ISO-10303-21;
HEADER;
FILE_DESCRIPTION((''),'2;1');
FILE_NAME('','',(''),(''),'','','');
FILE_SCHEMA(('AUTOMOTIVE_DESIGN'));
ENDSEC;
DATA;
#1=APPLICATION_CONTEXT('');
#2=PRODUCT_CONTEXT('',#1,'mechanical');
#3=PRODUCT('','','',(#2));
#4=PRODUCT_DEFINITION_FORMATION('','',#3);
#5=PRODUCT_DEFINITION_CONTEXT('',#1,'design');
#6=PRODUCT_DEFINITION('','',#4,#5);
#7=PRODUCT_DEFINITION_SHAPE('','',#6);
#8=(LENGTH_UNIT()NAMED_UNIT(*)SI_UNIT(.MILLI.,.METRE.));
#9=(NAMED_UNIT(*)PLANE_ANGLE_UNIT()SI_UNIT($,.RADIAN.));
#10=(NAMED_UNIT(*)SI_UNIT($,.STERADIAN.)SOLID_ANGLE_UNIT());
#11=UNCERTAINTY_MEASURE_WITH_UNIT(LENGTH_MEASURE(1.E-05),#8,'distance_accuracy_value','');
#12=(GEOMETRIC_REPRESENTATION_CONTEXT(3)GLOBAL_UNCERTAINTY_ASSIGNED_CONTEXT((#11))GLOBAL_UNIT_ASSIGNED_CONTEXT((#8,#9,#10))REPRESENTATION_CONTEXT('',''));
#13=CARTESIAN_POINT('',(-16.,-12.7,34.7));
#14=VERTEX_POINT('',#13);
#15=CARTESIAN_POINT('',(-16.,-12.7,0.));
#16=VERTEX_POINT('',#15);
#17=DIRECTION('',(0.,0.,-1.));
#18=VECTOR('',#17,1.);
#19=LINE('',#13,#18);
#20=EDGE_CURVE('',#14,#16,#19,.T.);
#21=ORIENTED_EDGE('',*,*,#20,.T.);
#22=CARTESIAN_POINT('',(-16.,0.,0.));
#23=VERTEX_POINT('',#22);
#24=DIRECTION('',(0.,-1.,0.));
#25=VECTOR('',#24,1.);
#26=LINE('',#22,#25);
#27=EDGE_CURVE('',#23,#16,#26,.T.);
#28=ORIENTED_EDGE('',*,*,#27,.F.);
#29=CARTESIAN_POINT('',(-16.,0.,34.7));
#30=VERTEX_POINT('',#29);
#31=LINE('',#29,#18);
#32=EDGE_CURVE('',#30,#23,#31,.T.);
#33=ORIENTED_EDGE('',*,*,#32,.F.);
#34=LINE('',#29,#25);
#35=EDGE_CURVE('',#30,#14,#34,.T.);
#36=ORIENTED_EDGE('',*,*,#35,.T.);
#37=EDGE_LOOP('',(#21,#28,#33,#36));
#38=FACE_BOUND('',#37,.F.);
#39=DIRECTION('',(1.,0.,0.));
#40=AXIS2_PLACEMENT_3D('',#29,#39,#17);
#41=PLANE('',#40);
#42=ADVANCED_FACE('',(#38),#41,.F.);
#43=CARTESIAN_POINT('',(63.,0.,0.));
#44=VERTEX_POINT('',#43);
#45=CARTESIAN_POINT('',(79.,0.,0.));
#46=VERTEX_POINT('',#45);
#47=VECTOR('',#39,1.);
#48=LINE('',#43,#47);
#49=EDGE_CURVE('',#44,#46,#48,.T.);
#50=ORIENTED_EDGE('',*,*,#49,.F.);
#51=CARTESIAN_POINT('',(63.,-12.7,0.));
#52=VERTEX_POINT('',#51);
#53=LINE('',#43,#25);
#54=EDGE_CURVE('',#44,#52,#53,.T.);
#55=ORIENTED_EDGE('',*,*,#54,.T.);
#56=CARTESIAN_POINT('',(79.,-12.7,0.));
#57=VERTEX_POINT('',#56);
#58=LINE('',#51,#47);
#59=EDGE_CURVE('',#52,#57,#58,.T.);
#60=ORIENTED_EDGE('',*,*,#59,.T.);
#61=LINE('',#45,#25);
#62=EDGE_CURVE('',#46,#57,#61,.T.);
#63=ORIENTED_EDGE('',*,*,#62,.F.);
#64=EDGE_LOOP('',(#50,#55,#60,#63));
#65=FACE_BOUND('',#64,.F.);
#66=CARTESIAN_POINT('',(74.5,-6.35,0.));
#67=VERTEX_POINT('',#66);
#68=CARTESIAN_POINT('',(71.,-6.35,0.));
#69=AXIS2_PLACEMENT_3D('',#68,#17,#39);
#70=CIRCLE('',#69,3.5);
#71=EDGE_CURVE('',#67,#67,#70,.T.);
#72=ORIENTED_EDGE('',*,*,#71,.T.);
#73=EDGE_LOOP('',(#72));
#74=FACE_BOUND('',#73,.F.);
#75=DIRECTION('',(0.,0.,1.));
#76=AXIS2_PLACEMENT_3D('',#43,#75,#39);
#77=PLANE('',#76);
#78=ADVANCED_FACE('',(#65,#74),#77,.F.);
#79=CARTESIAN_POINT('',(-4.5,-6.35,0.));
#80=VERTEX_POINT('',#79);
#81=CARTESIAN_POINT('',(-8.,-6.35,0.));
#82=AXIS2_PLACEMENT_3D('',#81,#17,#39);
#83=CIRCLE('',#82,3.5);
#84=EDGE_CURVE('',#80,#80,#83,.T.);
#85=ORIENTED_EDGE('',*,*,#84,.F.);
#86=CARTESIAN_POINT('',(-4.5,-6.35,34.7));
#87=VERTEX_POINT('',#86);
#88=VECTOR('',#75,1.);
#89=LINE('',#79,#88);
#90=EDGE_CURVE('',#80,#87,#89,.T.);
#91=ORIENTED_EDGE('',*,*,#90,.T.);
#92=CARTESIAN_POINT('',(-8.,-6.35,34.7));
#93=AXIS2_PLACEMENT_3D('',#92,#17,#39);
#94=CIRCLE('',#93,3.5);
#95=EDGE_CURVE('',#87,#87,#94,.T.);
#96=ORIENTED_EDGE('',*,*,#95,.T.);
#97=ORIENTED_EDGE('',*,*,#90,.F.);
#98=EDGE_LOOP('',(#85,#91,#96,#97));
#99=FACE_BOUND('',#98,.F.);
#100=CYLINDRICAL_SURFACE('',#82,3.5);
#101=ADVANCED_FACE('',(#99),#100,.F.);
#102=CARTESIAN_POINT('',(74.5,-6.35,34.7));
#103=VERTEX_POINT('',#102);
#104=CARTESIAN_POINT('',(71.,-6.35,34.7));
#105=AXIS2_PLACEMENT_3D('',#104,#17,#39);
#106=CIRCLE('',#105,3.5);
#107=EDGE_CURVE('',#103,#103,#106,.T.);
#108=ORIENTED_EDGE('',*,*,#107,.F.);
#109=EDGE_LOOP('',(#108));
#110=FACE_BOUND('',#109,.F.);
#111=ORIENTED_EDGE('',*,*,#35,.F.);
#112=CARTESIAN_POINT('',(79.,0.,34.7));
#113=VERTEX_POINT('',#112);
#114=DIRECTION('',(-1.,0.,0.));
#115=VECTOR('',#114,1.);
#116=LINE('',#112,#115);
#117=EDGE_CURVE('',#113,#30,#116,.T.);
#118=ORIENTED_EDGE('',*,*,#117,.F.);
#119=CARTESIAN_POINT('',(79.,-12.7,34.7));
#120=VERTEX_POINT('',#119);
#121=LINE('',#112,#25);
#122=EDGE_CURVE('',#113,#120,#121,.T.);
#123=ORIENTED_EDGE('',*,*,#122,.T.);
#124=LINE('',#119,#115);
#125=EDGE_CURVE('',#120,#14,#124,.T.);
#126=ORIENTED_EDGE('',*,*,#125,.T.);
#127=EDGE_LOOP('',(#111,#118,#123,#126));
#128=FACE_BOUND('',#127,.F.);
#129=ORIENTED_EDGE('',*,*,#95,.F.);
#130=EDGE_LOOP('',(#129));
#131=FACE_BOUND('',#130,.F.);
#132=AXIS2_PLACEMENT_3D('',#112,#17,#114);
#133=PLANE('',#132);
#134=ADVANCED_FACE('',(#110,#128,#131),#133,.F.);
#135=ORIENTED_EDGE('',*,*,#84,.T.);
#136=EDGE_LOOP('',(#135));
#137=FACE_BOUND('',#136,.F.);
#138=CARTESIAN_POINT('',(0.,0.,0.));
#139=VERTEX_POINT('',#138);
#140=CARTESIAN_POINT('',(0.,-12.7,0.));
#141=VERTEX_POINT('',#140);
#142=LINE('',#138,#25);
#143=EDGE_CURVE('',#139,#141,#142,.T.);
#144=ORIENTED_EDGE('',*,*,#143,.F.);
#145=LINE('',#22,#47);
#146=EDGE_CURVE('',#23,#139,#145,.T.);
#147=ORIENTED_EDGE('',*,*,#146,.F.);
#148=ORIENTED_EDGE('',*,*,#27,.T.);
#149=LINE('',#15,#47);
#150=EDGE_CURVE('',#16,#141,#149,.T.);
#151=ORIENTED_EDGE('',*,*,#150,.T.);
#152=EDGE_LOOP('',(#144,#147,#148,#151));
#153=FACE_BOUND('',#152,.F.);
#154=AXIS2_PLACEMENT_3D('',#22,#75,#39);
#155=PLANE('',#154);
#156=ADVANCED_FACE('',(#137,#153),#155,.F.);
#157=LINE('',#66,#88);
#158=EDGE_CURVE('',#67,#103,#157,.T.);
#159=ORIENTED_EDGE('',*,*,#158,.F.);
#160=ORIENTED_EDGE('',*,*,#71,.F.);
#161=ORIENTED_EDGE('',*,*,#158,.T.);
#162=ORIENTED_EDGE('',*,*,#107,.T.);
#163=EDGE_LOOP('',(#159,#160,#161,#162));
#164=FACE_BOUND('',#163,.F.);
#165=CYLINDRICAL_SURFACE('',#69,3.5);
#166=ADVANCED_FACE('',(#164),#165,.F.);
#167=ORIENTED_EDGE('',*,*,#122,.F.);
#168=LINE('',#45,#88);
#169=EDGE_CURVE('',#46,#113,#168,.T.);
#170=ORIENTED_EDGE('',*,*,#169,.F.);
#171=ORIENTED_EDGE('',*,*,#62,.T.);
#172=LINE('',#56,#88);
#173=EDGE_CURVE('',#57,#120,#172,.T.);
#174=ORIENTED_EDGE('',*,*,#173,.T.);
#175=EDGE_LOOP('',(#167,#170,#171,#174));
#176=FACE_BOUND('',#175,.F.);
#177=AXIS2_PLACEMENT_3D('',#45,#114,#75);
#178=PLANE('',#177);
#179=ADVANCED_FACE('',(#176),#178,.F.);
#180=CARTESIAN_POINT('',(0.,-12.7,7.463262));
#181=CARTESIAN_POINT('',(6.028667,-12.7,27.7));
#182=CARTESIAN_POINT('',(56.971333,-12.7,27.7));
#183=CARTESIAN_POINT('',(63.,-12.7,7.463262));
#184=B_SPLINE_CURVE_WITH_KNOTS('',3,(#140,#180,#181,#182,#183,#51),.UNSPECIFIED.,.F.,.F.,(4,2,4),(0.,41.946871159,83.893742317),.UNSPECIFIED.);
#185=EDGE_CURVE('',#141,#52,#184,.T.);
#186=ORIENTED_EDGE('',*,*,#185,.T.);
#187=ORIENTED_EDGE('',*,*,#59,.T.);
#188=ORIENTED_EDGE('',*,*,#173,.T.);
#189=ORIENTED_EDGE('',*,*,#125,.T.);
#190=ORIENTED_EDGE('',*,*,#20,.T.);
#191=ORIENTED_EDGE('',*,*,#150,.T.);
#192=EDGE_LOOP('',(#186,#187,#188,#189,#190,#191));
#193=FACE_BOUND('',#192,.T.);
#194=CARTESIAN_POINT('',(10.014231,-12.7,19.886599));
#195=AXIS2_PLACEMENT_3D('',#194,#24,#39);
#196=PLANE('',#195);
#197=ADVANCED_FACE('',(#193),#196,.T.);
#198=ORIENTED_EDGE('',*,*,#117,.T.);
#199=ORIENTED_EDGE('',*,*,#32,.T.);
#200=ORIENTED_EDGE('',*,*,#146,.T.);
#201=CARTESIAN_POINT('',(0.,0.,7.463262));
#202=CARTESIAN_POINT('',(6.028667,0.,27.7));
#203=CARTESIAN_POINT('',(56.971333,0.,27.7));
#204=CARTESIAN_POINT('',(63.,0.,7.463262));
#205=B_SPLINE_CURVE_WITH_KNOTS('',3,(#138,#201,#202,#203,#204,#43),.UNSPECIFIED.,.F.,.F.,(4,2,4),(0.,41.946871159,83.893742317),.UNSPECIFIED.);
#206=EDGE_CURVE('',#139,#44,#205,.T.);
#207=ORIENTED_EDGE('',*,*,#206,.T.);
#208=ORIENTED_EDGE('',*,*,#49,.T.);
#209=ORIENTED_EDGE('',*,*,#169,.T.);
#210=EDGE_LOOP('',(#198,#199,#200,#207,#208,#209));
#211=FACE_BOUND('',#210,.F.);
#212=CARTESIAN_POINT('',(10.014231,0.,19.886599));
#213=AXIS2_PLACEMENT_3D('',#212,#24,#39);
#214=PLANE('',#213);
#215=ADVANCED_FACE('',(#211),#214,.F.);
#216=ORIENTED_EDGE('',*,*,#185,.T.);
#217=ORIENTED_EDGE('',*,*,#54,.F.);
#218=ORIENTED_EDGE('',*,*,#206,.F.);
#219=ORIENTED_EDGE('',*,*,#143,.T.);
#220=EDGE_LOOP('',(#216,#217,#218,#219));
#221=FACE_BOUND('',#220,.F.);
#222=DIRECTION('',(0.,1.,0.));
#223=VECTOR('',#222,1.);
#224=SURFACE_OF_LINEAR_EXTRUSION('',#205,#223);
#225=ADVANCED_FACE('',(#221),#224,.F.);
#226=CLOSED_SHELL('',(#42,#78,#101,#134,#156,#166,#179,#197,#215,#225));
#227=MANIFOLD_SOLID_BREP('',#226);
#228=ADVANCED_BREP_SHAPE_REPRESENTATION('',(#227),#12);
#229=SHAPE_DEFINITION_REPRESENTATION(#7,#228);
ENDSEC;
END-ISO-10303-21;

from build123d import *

# Parameters (mm, degrees)
F1_DEPTH = 12.7
F2_R     = 3.5
F3_DEPTH = 34.7010003931


with BuildPart() as f1:
    # F0 (on Front) → F1 (new body)
    with BuildSketch(Plane.XZ):
        with BuildLine():
            Line((-7.0000002931, 0), (0, 0))
            add(Edge.make_bspline(
                [(0, 0), (0, 7.4632624164), (6.0286673327, 27.7), (31.5, 27.7)],
                knots=[0, 0, 0, 0, 41.9468711586, 41.9468711586, 41.9468711586, 41.9468711586], degree=3))
            Line((31.5, 27.7), (31.5, 34.7000002931))
            Line((31.5, 34.7000002931), (27.8526304737, 34.7000002931))
            add(Edge.make_bspline(
                [(-7.0000002931, 0), (-7.0039994936, 0.2340387149), (-7.0037511705, 0.948501906), (-6.9151085802, 2.7064518501), (-6.5108229743, 5.6903444563), (-5.45581027, 10.1440145543), (-3.2381450913, 15.5278434101), (0.3694739726, 21.3486442297), (5.587224769, 26.85724492), (12.594863214, 31.3943142529), (20.2705683515, 34.1506367566), (25.5784159374, 34.6301697858), (27.8526304737, 34.7000002931)],
                knots=[0, 0, 0, 0, 0.7020561458, 2.1432682107, 5.2767521047, 9.7221639973, 15.8389070563, 22.6581648152, 30.1626757657, 38.4005606449, 47.497203749, 54.3101388825, 54.3101388825, 54.3101388825, 54.3101388825], degree=3))
        make_face()
        with BuildLine():
            Line((31.5, 34.7000002931), (31.5, 27.7))
            add(Edge.make_bspline(
                [(63, 0), (63, 7.4632624164), (56.9713326673, 27.7), (31.5, 27.7)],
                knots=[0, 0, 0, 0, 41.9468711586, 41.9468711586, 41.9468711586, 41.9468711586], degree=3))
            Line((63, 0), (79, 0))
            Line((79, 0), (79, 34.7000002931))
            Line((79, 34.7000002931), (31.5, 34.7000002931))
        make_face()
        with BuildLine():
            Line((-16, 0), (-7.0000002931, 0))
            add(Edge.make_bspline(
                [(-7.0000002931, 0), (-7.0039994936, 0.2340387149), (-7.0037511705, 0.948501906), (-6.9151085802, 2.7064518501), (-6.5108229743, 5.6903444563), (-5.45581027, 10.1440145543), (-3.2381450913, 15.5278434101), (0.3694739726, 21.3486442297), (5.587224769, 26.85724492), (12.594863214, 31.3943142529), (20.2705683515, 34.1506367566), (25.5784159374, 34.6301697858), (27.8526304737, 34.7000002931)],
                knots=[0, 0, 0, 0, 0.7020561458, 2.1432682107, 5.2767521047, 9.7221639973, 15.8389070563, 22.6581648152, 30.1626757657, 38.4005606449, 47.497203749, 54.3101388825, 54.3101388825, 54.3101388825, 54.3101388825], degree=3))
            Line((27.8526304737, 34.7000002931), (-16, 34.7000002931))
            Line((-16, 34.7000002931), (-16, 0))
        make_face()
    extrude(amount=F1_DEPTH)

    # F2 (on face) → F3 (cut, through all)
    with BuildSketch(Plane(origin=(0, 0, 0), x_dir=(1, 0, 0), z_dir=(0, 0, -1))):
        with Locations((-8, 6.35)):
            Circle(F2_R)
        with Locations((71, 6.35)):
            Circle(F2_R)
    extrude(amount=-F3_DEPTH, mode=Mode.SUBTRACT)


solid = f1.part
